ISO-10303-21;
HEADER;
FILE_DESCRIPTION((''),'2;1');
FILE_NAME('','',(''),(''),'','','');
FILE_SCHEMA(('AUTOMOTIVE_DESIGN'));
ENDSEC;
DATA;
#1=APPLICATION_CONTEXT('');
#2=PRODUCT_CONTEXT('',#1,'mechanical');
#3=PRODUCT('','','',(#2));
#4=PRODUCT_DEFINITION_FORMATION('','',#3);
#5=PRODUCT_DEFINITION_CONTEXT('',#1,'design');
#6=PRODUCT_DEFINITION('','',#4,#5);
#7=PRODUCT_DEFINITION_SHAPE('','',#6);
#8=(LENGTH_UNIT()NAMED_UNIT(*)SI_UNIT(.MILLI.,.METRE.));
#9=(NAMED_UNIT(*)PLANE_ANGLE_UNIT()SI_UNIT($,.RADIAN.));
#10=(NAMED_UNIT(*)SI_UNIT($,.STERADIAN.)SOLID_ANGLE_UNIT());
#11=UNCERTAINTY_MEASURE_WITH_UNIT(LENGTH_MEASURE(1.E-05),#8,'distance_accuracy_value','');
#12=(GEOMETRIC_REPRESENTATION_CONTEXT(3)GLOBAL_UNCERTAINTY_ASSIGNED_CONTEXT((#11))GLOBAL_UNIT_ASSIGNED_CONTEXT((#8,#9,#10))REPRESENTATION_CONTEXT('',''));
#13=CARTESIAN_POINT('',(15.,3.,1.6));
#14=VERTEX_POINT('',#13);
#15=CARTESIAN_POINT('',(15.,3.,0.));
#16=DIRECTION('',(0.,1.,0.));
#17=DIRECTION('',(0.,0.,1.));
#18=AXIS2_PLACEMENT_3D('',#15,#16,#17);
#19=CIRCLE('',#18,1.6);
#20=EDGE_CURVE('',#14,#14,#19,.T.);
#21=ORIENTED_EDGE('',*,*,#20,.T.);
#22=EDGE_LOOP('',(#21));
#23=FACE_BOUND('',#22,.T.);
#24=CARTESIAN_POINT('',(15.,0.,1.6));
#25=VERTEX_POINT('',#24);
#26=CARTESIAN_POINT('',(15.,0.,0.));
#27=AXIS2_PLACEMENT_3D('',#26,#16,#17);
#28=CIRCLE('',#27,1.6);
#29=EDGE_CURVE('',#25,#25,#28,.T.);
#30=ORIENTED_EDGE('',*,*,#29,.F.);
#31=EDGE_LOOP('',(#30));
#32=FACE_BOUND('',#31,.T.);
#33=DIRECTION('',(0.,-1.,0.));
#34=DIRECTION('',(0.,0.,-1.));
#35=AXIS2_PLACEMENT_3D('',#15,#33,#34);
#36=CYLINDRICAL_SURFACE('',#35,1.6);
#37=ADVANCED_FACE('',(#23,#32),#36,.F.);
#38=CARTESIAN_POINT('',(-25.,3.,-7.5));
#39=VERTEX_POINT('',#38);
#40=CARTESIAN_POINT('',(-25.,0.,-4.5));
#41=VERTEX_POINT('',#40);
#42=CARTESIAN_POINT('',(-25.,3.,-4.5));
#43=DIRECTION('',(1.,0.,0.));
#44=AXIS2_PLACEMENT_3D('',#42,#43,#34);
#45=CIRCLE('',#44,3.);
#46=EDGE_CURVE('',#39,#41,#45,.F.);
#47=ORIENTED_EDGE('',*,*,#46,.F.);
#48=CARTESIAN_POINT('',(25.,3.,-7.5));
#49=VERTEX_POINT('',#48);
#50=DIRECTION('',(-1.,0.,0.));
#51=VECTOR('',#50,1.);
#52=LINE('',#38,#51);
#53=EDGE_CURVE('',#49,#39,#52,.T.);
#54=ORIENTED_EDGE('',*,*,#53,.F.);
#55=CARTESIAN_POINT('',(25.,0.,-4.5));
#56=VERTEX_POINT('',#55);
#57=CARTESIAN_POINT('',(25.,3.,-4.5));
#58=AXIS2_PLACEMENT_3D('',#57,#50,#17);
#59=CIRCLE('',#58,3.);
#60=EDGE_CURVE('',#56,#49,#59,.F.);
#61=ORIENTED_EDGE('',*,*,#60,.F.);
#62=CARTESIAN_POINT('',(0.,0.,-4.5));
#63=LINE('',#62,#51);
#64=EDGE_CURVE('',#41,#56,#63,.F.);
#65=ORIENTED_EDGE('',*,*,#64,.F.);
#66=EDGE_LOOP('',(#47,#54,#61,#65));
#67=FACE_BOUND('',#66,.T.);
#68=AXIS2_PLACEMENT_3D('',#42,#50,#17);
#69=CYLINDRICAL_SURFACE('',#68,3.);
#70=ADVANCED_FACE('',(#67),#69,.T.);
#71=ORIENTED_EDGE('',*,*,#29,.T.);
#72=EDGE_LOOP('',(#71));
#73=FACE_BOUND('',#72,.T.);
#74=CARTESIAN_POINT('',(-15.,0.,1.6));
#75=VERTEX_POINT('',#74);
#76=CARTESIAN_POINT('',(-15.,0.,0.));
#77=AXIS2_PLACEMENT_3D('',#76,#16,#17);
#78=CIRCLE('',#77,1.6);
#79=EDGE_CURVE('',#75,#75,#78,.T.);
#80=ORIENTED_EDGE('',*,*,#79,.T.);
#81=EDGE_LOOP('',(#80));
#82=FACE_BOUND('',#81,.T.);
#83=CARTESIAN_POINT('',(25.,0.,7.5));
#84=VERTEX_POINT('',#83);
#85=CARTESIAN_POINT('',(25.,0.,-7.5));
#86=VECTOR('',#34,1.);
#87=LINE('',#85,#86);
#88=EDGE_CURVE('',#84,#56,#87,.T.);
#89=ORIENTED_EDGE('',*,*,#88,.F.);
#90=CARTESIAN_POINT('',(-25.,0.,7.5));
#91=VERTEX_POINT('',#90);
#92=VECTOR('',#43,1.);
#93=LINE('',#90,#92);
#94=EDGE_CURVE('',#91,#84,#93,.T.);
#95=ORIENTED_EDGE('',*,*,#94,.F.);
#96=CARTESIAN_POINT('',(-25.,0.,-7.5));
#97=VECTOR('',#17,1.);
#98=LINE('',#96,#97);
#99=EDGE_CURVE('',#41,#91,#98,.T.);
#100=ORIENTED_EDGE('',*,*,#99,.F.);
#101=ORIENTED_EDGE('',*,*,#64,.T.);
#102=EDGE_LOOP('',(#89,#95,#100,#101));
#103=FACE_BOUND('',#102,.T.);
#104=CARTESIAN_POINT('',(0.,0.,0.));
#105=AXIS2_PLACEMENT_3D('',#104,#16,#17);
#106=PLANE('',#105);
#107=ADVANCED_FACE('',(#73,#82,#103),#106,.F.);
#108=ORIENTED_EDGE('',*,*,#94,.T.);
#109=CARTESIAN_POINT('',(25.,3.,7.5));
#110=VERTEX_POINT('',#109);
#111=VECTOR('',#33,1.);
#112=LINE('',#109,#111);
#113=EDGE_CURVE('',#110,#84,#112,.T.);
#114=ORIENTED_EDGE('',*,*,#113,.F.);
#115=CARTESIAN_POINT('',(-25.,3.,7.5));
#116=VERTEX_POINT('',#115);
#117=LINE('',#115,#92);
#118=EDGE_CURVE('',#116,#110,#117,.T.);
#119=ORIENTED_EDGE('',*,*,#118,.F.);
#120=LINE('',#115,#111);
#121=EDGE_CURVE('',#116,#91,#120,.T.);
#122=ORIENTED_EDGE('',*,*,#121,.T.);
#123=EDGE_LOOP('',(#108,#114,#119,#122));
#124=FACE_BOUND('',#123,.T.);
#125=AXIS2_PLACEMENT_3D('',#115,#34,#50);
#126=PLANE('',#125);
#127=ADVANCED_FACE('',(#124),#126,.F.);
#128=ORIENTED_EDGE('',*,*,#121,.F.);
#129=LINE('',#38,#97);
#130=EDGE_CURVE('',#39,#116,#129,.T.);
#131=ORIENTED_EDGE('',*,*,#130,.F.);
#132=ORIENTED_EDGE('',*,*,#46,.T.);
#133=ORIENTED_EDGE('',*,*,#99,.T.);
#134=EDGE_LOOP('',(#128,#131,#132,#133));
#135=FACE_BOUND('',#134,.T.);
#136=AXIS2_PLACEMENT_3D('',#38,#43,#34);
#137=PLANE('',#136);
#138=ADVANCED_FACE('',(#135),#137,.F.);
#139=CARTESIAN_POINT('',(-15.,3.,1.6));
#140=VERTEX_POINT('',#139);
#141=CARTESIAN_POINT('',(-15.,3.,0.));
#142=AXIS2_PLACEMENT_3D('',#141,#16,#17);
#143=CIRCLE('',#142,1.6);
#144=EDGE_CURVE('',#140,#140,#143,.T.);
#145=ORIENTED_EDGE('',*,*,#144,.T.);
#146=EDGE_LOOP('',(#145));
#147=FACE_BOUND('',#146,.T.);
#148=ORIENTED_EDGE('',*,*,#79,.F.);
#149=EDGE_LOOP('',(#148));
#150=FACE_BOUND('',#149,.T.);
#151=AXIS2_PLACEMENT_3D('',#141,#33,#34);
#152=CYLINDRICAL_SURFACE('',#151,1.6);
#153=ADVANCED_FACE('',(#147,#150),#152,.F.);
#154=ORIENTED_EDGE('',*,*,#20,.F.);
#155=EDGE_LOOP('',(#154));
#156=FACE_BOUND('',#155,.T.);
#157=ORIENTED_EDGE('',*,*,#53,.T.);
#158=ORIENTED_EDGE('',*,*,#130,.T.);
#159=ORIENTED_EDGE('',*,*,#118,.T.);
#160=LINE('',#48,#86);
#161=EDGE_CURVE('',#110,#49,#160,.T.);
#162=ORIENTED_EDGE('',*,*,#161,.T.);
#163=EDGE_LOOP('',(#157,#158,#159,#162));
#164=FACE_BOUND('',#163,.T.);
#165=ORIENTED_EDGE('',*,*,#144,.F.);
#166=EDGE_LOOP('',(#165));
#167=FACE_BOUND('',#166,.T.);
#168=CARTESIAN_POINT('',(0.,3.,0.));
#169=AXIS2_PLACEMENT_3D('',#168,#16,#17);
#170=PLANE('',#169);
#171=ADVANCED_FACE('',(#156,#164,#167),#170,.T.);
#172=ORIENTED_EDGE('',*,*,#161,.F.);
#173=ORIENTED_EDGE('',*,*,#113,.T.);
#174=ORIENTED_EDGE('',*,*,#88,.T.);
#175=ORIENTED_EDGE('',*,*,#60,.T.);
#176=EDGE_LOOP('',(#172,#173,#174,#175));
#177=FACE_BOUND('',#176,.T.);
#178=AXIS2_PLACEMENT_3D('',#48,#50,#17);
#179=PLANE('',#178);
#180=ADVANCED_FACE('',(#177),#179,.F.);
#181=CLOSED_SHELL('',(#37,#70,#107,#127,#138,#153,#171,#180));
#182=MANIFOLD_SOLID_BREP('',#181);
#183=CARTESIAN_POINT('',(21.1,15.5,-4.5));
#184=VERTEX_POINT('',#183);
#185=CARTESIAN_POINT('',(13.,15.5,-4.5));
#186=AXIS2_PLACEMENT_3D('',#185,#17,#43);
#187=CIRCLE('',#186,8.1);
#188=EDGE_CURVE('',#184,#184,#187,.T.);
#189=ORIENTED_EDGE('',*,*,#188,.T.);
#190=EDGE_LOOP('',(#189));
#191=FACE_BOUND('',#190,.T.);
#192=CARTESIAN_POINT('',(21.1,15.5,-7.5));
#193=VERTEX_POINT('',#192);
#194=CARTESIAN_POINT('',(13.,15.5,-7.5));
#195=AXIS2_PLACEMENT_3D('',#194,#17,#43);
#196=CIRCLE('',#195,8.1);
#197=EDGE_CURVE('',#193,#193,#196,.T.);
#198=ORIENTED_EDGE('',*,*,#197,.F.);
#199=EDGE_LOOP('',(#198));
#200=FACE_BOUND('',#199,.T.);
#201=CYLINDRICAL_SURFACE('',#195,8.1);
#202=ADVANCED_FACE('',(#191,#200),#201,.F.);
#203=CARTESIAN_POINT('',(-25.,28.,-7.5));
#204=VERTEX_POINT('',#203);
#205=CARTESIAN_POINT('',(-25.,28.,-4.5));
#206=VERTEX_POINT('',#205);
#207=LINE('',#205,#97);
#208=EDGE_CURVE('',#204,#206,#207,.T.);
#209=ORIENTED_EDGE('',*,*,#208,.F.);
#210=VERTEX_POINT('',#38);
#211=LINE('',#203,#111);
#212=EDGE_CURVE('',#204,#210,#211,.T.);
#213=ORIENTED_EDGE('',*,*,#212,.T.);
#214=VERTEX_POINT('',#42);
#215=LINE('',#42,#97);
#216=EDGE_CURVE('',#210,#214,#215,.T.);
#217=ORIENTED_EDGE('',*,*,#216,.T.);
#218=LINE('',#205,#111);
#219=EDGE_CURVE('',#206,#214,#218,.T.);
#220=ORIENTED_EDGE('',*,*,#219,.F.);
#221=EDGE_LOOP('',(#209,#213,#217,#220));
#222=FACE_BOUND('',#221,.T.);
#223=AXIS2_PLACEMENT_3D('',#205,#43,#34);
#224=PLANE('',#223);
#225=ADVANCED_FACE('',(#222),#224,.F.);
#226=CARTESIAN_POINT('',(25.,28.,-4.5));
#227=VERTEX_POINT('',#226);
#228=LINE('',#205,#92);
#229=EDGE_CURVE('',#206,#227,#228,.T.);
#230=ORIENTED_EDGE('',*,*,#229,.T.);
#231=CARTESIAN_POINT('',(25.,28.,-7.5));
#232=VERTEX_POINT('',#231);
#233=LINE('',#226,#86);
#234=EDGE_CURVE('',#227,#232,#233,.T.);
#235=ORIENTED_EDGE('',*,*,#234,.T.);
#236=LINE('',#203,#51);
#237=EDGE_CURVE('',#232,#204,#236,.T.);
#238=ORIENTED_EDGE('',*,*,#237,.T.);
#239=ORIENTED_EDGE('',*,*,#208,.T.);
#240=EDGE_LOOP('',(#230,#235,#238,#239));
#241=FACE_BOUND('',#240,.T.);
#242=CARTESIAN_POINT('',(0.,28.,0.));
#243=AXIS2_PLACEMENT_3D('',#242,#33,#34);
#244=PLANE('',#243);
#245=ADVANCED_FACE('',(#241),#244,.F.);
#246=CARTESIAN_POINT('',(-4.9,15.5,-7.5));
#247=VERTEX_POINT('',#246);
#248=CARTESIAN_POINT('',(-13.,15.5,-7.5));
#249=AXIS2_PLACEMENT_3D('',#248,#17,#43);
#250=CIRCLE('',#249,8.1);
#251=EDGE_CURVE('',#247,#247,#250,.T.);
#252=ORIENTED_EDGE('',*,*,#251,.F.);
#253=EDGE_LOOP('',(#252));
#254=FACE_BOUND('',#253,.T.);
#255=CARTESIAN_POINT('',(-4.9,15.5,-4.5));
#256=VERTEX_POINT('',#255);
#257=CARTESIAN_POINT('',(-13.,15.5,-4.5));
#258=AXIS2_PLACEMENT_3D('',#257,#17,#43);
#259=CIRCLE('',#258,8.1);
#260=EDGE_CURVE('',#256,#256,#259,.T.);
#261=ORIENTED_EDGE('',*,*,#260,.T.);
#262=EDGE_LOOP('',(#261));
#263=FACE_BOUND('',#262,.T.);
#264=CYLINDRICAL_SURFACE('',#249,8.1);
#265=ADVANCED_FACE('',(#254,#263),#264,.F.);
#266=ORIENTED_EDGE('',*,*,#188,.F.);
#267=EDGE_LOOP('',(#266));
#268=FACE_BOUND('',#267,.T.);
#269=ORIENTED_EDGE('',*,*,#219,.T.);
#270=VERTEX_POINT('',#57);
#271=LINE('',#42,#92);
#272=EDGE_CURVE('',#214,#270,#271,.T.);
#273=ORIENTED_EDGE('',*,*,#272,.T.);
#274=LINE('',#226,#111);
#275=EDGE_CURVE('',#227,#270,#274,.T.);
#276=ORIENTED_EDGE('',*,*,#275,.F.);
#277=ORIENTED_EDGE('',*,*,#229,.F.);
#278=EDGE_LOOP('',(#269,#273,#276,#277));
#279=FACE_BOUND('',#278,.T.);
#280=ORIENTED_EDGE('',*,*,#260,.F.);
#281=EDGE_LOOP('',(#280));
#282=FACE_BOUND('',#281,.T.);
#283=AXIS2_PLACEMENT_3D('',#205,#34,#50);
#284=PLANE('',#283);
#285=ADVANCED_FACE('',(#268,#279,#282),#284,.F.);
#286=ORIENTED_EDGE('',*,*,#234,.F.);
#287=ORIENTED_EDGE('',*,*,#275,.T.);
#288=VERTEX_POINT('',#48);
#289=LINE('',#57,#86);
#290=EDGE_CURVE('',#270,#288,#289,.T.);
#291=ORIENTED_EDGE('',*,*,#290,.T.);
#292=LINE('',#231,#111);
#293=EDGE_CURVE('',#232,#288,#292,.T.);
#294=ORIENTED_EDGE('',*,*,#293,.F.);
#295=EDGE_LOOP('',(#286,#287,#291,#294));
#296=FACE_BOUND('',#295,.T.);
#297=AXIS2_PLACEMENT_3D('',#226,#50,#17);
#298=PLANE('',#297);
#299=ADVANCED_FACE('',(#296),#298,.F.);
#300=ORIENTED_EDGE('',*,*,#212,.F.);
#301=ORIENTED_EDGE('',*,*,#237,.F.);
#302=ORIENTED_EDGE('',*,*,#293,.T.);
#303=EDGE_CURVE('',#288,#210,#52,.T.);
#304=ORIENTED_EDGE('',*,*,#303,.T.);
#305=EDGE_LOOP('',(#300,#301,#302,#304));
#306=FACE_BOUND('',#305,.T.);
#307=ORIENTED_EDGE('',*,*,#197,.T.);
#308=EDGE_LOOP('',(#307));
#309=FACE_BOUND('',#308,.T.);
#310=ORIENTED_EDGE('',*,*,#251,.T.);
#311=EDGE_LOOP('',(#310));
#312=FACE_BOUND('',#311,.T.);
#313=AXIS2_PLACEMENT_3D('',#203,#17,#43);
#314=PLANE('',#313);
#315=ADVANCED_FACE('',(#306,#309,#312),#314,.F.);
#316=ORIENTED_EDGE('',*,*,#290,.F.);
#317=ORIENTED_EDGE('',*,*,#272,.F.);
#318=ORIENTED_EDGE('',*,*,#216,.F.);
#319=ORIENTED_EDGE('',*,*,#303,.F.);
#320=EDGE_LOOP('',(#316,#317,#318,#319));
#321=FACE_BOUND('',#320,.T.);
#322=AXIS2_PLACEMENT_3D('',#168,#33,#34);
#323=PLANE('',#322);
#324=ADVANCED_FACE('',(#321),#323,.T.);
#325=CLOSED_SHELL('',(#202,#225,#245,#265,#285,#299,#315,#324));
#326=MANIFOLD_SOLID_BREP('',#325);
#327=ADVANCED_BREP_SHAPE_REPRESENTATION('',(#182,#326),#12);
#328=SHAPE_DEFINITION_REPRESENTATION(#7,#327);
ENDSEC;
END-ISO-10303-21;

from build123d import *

# Parameters (mm, degrees)
SKETCH1_W           = 50
SKETCH1_H           = 15
SKETCH1_R           = 1.6
BOSS_EXTRUDE1_DEPTH = 3
SKETCH3_W           = 50
SKETCH3_H           = 3
BOSS_EXTRUDE3_DEPTH = 25
SKETCH4_R           = 8.1
CUT_EXTRUDE1_DEPTH  = 40.40812099
FILLET8_R           = 3


with BuildPart() as part:
    # Sketch1 → Boss-Extrude1 (new body)
    with BuildSketch(Plane(origin=(0, 0, 0), x_dir=(1, 0, 0), z_dir=(0, 1, 0))):
        Rectangle(SKETCH1_W, SKETCH1_H)
        with Locations(Location((-15, 0, 0), (0, 0, 270))):
            Circle(SKETCH1_R, mode=Mode.SUBTRACT)
        with Locations(Location((15, 0, 0), (0, 0, 270))):
            Circle(SKETCH1_R, mode=Mode.SUBTRACT)
    extrude(amount=BOSS_EXTRUDE1_DEPTH)

    # Fillet8
    fillet8_edges = [part.edges().sort_by_distance(p)[0] for p in [
        (0, 0, -7.5),
    ]]
    fillet(fillet8_edges, radius=FILLET8_R - 0.0001)  # a hair under: the kernel refuses the full size


with BuildPart() as body_2:
    # Sketch3 → Boss-Extrude3 (new body)
    with BuildSketch(Plane(origin=(0, 3, 0), x_dir=(1, 0, 0), z_dir=(0, 1, 0))):
        with Locations((0, 6)):
            Rectangle(SKETCH3_W, SKETCH3_H)
    extrude(amount=BOSS_EXTRUDE3_DEPTH)

    # Sketch4 → Cut-Extrude1 (cut, through all)
    with BuildSketch(Plane.XY.offset(-4.5)):
        with Locations((-13, 15.5)):
            Circle(SKETCH4_R)
        with Locations((13, 15.5)):
            Circle(SKETCH4_R)
    extrude(amount=-CUT_EXTRUDE1_DEPTH, mode=Mode.SUBTRACT)


solid = Compound([part.part, body_2.part])
